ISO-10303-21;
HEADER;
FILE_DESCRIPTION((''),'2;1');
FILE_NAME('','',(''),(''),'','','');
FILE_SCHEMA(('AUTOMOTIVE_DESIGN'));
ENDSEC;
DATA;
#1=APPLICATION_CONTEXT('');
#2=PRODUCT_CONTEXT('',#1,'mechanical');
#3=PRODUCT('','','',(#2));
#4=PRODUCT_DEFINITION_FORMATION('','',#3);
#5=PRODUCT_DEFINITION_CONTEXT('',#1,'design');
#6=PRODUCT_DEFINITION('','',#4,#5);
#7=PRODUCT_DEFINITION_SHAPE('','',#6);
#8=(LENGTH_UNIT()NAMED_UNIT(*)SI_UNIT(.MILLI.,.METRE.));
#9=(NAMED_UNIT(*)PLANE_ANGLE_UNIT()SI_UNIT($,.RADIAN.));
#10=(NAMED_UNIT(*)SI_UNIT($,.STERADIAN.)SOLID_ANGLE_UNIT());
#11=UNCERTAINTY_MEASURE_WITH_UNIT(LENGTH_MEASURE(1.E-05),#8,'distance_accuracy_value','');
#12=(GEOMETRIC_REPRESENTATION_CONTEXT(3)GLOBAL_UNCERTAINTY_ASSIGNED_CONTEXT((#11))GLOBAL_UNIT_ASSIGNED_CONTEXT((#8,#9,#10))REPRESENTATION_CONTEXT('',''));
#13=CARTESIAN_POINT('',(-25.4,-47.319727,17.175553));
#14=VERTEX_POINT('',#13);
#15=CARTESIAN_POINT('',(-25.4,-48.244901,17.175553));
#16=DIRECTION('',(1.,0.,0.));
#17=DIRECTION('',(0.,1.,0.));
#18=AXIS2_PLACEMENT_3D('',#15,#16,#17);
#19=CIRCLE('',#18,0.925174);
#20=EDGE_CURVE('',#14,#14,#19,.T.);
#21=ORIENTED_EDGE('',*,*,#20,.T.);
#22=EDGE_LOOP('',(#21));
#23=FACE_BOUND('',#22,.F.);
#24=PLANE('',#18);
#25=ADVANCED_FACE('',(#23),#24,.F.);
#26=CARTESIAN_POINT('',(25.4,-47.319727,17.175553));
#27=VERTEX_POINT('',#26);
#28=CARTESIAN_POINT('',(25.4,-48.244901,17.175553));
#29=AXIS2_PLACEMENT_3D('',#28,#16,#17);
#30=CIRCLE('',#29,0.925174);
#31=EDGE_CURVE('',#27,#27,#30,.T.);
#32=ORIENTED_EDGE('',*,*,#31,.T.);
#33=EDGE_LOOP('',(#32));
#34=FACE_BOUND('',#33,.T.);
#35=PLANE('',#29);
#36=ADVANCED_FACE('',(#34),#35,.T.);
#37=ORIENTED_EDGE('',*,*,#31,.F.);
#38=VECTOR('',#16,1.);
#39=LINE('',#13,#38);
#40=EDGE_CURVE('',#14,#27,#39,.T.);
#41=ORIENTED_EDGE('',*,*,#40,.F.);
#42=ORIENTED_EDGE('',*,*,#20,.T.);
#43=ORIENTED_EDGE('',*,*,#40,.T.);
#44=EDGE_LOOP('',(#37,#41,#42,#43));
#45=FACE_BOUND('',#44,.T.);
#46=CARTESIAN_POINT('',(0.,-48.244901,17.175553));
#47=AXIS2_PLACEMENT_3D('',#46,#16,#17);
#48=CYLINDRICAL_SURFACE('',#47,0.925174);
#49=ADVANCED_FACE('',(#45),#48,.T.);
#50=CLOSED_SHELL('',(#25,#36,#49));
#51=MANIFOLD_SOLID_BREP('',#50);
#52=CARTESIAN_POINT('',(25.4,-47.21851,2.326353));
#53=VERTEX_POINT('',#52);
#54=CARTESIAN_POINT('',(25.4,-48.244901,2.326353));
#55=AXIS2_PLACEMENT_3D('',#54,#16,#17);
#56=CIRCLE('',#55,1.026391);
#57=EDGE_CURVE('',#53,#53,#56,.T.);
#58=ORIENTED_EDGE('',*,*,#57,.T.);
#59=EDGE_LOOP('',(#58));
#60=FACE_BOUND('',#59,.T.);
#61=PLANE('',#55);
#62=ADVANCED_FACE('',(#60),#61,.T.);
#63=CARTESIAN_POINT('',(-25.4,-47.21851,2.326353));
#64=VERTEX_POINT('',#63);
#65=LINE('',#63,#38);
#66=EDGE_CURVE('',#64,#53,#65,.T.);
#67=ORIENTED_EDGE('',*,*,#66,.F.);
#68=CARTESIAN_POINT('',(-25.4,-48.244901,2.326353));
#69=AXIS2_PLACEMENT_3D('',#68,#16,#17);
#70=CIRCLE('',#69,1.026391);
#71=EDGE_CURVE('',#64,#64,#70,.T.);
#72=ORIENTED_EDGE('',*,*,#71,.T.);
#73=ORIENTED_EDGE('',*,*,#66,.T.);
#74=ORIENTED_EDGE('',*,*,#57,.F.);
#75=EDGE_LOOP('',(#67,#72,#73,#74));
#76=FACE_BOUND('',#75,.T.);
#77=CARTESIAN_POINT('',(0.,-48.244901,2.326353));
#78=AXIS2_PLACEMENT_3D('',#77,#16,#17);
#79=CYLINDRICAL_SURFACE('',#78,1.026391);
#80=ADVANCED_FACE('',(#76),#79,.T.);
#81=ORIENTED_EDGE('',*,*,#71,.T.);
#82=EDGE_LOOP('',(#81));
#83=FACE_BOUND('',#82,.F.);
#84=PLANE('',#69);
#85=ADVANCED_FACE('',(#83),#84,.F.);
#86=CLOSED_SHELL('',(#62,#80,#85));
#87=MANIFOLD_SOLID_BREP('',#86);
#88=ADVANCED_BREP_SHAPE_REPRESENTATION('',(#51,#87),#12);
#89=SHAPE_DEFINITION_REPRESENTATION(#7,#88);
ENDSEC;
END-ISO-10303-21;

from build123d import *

# Parameters (mm, degrees)
F3_R          = 0.9251736669
F4_DEPTH      = 25.4
F4_DEPTH_BACK = 25.4
F3_R_2        = 1.0263908893


# Not quite as in the source:
# - a feature of the source that left no trace in its solid (it failed there, or was rolled back) is left out
# - the program builds the solid bodies; features that only make, move or delete a surface that nothing else refers to are left out


with BuildPart() as f4:
    # F3 (on Right) → F4 (new body, two sides)
    with BuildSketch(Plane.YZ) as f4_sk:
        with Locations((-48.2449010015, 17.1755533665)):
            Circle(F3_R)
    extrude(amount=F4_DEPTH)
    extrude(f4_sk.sketch, amount=-F4_DEPTH_BACK)


with BuildPart() as f4b:
    # F3 (on Right) → F4, piece 2 (new body, two sides)
    with BuildSketch(Plane.YZ) as f4_2_sk:
        with Locations((-48.2449010015, 2.3263529874)):
            Circle(F3_R_2)
    extrude(amount=F4_DEPTH)
    extrude(f4_2_sk.sketch, amount=-F4_DEPTH_BACK)


solid = Compound([f4.part, f4b.part])
